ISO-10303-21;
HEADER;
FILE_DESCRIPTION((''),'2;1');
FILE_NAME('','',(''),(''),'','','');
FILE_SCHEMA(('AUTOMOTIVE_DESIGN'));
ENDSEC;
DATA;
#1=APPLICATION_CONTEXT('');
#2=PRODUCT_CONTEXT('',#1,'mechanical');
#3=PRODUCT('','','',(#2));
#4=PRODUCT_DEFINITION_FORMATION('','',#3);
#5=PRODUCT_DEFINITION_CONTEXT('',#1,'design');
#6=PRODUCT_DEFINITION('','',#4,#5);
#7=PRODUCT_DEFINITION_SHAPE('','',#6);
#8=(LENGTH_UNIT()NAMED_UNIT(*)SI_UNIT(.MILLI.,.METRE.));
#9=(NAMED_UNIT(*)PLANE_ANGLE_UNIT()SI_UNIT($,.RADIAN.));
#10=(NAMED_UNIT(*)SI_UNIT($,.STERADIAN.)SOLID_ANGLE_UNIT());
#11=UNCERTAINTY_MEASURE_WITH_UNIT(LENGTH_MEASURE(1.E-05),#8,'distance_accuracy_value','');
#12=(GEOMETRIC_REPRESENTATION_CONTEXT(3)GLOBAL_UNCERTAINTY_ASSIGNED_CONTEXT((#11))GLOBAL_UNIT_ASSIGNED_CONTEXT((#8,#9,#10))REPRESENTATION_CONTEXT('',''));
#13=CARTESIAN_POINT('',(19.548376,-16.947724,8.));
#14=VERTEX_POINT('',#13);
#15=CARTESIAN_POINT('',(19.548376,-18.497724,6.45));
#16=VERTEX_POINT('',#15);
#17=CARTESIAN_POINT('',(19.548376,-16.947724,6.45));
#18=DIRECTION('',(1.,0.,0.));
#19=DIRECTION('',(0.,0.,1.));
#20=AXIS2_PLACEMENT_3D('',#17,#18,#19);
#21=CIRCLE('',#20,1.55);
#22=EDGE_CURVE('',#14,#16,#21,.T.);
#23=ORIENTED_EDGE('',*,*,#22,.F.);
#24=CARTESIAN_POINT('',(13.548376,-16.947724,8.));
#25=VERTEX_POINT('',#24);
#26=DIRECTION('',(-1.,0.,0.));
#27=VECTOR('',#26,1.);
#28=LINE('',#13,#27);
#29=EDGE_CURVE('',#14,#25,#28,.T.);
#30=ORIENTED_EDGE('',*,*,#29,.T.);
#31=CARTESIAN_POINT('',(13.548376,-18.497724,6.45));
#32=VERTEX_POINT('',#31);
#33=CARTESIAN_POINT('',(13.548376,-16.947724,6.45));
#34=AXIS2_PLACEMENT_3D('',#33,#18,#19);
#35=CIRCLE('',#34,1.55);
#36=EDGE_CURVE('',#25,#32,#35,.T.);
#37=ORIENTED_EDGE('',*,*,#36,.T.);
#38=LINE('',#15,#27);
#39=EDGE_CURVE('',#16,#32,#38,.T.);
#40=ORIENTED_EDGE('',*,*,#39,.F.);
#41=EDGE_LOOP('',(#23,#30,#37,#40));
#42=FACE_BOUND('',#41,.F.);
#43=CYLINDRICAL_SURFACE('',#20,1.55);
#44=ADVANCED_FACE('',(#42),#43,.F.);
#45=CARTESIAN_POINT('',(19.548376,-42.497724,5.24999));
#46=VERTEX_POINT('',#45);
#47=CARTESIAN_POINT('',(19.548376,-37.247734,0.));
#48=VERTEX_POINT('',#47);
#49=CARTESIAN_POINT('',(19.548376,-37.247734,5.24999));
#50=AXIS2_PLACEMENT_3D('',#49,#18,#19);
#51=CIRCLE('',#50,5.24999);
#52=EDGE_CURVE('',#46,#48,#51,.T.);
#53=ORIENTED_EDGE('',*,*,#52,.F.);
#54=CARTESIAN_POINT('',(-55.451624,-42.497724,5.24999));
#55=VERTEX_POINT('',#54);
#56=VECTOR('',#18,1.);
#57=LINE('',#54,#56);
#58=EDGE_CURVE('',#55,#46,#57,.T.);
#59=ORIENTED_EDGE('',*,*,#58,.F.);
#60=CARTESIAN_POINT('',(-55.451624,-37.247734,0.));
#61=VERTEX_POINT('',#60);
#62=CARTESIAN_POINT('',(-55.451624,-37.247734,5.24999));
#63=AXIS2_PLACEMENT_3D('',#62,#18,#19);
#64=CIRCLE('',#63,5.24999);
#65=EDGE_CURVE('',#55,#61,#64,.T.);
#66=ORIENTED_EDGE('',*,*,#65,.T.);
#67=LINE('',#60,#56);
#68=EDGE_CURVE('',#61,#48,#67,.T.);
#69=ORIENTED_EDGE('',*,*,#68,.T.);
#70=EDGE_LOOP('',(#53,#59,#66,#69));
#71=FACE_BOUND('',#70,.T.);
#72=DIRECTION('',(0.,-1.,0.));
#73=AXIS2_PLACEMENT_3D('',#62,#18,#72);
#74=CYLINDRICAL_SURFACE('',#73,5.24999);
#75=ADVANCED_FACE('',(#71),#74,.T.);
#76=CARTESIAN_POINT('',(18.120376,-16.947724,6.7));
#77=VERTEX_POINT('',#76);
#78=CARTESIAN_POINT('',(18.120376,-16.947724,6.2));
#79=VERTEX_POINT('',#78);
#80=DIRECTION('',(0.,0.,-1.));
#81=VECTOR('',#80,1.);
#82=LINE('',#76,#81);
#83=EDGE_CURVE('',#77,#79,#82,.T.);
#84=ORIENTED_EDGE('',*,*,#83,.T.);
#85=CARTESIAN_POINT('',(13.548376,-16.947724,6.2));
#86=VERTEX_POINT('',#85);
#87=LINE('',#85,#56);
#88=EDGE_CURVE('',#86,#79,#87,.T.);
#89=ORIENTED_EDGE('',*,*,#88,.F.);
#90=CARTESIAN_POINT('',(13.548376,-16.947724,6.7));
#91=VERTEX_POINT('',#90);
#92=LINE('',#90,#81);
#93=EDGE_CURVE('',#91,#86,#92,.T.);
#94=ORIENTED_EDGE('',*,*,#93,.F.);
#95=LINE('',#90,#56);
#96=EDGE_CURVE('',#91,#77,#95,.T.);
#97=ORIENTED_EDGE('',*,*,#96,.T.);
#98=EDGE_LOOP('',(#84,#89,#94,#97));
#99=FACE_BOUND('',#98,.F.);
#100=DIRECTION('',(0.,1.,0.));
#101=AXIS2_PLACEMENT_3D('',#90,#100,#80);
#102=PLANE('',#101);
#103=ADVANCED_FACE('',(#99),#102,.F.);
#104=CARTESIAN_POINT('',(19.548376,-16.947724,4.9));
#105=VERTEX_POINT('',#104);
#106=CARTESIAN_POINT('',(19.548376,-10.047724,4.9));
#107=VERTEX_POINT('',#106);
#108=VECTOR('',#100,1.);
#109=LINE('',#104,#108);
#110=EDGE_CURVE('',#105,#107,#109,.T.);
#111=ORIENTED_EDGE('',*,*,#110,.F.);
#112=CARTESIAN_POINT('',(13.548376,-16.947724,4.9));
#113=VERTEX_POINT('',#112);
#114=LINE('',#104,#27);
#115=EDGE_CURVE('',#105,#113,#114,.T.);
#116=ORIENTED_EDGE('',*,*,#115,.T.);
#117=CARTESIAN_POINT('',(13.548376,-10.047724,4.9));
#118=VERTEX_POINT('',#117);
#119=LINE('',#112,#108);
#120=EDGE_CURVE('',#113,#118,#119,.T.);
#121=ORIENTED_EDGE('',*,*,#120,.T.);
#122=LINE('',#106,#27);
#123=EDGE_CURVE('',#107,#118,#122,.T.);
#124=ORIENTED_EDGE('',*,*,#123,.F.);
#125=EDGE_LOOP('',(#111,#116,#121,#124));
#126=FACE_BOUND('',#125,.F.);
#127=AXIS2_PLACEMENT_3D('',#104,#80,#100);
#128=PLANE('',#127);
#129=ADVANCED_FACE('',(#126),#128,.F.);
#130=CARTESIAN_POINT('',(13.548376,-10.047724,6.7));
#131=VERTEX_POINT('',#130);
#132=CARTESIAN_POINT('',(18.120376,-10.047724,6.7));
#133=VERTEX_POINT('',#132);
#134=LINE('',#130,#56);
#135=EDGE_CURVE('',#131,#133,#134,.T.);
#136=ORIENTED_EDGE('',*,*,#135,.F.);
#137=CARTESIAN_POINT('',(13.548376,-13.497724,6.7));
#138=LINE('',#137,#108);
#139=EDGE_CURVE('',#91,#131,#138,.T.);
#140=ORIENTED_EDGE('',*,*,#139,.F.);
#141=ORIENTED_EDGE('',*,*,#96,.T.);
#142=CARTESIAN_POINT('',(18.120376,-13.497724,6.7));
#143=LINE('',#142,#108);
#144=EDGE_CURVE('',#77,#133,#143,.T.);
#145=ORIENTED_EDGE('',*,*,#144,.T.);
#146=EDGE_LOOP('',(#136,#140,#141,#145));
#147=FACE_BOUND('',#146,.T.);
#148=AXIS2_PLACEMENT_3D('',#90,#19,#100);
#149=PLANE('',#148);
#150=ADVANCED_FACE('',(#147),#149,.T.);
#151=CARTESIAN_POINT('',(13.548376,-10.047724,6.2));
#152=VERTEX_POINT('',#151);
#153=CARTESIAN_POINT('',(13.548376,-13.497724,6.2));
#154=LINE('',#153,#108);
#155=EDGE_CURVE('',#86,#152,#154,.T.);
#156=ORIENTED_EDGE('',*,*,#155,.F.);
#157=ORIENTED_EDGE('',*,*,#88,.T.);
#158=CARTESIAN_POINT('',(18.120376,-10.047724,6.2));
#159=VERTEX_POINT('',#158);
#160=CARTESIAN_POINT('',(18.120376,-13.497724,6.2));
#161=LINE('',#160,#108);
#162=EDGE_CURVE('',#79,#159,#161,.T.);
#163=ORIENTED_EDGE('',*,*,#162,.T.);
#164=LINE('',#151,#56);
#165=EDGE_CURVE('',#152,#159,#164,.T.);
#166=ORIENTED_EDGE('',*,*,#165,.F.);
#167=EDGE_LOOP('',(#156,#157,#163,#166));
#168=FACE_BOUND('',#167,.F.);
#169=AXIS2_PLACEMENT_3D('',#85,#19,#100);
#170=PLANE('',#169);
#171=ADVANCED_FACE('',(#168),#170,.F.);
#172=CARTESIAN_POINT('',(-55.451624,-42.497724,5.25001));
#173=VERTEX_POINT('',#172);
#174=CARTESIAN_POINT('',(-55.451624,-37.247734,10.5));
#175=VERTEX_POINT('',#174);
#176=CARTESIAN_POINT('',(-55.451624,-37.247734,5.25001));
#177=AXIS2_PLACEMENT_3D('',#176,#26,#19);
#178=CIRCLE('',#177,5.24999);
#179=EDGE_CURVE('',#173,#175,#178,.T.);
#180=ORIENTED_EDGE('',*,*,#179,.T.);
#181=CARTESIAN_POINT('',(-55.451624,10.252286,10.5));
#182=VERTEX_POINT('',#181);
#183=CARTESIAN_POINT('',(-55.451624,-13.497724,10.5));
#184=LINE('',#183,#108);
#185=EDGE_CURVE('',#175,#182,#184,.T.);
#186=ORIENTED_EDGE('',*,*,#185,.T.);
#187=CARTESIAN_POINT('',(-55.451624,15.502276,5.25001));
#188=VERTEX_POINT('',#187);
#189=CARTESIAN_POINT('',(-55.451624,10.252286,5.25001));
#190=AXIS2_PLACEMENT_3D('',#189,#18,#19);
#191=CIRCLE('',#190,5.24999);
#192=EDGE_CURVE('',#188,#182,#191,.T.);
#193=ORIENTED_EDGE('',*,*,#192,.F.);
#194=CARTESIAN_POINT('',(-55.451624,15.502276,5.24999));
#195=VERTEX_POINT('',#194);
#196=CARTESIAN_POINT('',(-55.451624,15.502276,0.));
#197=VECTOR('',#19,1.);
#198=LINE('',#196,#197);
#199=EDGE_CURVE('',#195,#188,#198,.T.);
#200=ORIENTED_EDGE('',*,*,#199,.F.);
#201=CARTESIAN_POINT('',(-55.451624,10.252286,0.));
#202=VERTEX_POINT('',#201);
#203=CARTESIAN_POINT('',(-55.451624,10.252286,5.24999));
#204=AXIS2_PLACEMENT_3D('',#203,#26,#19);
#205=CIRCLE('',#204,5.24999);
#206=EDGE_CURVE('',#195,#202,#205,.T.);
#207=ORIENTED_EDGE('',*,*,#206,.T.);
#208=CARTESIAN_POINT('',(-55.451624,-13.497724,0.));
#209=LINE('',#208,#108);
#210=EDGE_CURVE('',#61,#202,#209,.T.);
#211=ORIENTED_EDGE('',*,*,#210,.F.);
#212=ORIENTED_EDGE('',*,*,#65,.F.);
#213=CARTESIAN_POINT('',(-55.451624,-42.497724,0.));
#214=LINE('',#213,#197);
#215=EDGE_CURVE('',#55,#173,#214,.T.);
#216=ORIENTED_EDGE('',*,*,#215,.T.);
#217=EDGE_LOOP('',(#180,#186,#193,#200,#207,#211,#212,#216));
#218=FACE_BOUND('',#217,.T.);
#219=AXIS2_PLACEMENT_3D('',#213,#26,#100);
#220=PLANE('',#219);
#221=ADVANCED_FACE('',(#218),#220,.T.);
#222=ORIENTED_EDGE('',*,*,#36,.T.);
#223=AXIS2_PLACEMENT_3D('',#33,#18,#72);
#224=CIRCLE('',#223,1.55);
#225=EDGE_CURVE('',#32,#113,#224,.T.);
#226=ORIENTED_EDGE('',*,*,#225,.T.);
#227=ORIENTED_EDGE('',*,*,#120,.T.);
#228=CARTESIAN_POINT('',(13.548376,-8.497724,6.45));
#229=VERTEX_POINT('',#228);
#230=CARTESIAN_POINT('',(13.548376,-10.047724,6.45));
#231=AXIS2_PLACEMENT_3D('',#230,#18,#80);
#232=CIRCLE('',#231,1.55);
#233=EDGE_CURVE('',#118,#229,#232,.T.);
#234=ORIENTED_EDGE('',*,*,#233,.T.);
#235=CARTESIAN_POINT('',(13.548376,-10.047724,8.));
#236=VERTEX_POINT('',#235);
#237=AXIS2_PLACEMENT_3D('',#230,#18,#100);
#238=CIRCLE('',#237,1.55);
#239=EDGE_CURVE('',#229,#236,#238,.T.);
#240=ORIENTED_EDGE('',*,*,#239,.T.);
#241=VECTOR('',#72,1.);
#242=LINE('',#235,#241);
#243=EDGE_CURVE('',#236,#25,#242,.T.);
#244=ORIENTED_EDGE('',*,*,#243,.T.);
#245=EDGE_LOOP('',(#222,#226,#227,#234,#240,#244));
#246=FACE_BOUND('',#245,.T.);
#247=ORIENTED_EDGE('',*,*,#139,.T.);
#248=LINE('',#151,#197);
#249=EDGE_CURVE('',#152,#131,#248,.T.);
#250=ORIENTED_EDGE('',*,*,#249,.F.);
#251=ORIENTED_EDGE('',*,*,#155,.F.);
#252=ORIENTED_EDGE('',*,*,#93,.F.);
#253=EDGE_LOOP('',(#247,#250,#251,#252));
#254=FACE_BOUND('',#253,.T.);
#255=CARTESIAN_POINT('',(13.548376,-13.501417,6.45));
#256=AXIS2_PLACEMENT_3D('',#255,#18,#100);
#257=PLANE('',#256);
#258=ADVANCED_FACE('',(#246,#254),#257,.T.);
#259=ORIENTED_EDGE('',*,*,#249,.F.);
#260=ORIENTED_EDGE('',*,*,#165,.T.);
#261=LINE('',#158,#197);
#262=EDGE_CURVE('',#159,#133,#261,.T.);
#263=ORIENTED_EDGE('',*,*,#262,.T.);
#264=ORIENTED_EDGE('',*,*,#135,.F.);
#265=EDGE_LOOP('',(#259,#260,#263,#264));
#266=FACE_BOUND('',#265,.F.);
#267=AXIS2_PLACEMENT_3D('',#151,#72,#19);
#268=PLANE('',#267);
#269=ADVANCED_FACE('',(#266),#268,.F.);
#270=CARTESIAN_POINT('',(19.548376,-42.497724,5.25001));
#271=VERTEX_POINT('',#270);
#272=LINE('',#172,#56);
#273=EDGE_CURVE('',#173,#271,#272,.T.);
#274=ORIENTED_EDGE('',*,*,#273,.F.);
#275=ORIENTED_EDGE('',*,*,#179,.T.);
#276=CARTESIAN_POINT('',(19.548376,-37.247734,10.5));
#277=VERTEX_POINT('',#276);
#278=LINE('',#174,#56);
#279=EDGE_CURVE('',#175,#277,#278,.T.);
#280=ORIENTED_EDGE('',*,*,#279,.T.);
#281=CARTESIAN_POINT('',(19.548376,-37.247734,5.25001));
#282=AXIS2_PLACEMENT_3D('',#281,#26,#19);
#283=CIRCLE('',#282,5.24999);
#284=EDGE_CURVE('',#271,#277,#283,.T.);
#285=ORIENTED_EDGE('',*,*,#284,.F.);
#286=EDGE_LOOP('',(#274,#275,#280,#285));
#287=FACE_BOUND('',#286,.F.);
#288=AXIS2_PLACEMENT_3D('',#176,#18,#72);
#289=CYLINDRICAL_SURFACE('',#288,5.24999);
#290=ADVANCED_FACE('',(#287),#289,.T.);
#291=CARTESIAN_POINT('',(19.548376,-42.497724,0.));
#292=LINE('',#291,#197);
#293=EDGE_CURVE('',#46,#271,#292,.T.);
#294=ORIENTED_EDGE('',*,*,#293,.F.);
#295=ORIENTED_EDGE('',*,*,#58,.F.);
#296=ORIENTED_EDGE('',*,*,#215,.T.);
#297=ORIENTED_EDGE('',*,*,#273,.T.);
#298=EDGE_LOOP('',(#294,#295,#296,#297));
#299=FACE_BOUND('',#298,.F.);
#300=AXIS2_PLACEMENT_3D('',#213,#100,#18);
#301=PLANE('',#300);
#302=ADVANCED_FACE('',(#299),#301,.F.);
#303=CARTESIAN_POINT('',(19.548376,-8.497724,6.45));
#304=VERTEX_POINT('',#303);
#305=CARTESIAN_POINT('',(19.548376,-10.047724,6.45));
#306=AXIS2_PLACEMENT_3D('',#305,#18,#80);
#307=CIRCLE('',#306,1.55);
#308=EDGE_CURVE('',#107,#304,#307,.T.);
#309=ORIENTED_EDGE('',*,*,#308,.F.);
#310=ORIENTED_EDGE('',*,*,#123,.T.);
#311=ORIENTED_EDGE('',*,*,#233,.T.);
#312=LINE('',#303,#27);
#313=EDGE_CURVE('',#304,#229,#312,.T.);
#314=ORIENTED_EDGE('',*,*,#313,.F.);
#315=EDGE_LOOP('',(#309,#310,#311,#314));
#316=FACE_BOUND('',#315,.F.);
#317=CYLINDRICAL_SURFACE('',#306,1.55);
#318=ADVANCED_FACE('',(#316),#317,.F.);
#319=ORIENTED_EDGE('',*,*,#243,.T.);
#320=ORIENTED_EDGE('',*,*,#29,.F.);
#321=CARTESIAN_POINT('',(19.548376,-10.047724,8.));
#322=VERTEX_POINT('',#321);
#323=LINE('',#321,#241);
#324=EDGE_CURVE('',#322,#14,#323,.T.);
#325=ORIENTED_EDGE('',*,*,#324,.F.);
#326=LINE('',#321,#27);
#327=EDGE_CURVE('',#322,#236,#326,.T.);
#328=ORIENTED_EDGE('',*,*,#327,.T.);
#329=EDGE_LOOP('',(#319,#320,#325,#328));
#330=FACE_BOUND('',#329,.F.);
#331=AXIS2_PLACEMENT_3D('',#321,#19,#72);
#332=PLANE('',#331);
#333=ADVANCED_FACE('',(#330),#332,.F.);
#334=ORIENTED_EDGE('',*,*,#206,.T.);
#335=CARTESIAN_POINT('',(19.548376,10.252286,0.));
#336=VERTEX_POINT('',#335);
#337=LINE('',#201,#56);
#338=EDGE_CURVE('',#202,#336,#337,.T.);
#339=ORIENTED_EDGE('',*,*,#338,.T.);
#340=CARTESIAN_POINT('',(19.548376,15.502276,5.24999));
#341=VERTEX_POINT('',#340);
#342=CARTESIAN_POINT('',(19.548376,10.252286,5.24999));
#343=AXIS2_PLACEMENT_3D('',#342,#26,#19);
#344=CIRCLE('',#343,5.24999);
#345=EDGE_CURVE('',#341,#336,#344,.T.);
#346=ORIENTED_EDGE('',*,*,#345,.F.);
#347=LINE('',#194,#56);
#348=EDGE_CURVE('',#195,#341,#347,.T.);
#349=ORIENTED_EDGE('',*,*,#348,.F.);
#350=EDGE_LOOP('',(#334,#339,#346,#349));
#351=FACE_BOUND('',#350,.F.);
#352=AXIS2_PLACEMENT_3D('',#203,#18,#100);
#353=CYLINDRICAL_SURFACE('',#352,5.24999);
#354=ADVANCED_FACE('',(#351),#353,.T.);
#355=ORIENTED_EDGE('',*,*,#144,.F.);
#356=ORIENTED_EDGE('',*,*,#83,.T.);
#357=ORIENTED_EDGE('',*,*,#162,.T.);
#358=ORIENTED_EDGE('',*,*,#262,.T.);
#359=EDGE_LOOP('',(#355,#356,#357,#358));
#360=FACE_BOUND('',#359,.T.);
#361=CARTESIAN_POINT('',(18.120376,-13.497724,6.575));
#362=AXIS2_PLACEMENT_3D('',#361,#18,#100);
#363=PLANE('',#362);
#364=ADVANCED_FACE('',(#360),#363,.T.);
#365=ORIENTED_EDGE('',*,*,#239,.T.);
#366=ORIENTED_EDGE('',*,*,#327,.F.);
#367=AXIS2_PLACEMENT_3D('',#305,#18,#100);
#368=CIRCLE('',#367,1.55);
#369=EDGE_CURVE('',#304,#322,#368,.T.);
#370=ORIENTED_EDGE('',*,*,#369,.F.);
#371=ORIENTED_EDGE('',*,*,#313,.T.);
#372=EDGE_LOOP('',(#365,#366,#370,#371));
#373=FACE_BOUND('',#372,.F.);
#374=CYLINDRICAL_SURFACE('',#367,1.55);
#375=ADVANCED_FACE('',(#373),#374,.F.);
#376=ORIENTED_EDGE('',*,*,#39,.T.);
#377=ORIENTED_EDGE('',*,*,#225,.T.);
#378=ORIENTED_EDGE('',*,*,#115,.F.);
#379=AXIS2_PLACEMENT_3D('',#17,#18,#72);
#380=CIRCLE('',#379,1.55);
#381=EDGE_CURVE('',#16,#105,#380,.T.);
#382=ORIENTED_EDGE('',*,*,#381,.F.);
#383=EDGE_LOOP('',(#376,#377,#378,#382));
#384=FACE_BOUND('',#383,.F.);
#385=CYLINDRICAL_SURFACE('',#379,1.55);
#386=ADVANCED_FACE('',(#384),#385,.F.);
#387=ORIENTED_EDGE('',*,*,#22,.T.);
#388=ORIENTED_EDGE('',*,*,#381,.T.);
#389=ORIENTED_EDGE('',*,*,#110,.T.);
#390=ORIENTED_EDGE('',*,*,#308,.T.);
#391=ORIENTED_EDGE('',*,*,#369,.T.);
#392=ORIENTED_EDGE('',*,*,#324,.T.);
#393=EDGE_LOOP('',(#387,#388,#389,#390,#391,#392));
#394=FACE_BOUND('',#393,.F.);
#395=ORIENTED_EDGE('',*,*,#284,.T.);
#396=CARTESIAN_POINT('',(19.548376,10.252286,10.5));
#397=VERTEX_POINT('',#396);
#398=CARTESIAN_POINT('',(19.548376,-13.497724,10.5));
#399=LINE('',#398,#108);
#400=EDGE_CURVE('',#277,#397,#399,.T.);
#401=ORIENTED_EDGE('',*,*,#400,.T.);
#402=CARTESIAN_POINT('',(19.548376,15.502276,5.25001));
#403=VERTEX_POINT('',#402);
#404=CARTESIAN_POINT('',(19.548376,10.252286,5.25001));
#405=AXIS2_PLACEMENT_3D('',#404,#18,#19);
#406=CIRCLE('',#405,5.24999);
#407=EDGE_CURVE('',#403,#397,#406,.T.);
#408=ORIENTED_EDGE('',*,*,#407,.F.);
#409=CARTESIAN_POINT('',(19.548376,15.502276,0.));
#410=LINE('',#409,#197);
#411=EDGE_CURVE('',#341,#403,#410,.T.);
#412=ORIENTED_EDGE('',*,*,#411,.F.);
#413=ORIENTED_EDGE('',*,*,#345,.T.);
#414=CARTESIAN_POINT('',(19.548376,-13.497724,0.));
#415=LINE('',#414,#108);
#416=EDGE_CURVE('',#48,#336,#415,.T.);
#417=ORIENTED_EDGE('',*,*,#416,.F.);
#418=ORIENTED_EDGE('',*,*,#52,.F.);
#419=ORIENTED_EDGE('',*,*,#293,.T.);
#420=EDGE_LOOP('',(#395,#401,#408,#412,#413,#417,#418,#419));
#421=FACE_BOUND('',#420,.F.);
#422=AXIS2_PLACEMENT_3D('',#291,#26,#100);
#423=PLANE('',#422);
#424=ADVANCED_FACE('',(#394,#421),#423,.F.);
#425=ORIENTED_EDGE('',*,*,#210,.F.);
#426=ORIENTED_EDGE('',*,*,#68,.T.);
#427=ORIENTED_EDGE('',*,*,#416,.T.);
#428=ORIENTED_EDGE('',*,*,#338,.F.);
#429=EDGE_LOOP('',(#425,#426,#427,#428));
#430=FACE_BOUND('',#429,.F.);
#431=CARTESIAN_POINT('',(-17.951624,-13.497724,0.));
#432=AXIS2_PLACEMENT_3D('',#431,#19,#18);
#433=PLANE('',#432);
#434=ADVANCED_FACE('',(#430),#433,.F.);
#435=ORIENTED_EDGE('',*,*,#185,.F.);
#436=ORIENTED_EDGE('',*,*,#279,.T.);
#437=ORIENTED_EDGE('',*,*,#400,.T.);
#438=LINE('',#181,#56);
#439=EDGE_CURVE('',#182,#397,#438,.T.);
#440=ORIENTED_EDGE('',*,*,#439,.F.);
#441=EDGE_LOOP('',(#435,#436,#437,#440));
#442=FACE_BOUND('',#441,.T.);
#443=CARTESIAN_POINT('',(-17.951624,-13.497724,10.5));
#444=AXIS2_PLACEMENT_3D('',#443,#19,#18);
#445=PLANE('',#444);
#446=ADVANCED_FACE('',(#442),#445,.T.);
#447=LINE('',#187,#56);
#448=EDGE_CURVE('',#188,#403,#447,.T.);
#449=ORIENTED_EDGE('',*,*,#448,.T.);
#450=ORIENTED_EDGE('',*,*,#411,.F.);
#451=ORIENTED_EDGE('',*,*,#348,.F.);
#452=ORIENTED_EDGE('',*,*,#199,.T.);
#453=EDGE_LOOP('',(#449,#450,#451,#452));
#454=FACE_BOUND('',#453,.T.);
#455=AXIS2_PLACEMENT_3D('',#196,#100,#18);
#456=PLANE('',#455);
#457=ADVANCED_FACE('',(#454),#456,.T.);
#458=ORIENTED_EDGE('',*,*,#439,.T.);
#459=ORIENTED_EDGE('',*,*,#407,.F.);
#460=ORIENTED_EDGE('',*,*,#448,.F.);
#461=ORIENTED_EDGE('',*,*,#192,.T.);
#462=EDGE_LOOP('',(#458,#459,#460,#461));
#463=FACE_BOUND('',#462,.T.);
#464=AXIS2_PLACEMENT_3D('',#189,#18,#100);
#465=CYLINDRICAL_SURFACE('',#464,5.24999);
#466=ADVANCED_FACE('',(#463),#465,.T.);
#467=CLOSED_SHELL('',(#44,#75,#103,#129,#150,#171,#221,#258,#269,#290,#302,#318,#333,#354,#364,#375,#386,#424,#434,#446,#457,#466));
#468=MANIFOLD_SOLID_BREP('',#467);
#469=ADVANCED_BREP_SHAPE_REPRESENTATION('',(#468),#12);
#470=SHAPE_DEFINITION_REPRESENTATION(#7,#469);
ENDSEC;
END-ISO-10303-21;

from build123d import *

# Parameters (mm, degrees)
F0_W     = 75
F0_H     = 58
F1_DEPTH = 10.5
F3_R     = 5.24999
F4_DEPTH = 6
F5_W     = 6.9
F5_H     = 0.25
F6_DEPTH = 4.572


# Not quite as in the source:
# - a fillet or chamfer is up to 0.001 mm smaller than in the source, because OpenCascade refuses the exact size


with BuildPart() as f1:
    # F0 (on Top) → F1 (new body)
    with BuildSketch(Plane.XY):
        with Locations((-17.9516240954, -13.4977242947)):
            Rectangle(F0_W, F0_H)
    extrude(amount=F1_DEPTH)

    # F3 (radius 5.25 in the source; OpenCascade refuses exactly that, so slightly less here)
    f3_edges = [f1.edges().sort_by_distance(p)[0] for p in [
        (-17.951624, -42.497724, 10.5),
        (-17.951624, -42.497724, 0),
        (-17.951624, 15.502276, 10.5),
        (-17.951624, 15.502276, 0),
    ]]
    fillet(f3_edges, radius=F3_R)

    # F2 (on face) → F4 (cut)
    with BuildSketch(Plane.YZ.offset(19.5483759046)):
        with BuildLine():
            Line((-10.0477242947, 8), (-13.4977242947, 8))
            Line((-13.4977242947, 8), (-16.9477242947, 8))
            ThreePointArc((-16.9477242947, 8), (-15.8517087838, 7.5460155108), (-15.3977242947, 6.45))
            ThreePointArc((-15.3977242947, 6.45), (-15.8517087838, 5.3539844892), (-16.9477242947, 4.9))
            Line((-16.9477242947, 4.9), (-10.0477242947, 4.9))
            ThreePointArc((-10.0477242947, 4.9), (-11.5977242947, 6.45), (-10.0477242947, 8))
        make_face()
        with BuildLine():
            Line((-10.0477242947, 4.9), (-10.0477242947, 8))
            ThreePointArc((-10.0477242947, 8), (-11.5977242947, 6.45), (-10.0477242947, 4.9))
        make_face()
        with BuildLine():
            ThreePointArc((-8.4977242947, 6.45), (-8.9517087838, 7.5460155108), (-10.0477242947, 8))
            Line((-10.0477242947, 8), (-10.0477242947, 4.9))
            ThreePointArc((-10.0477242947, 4.9), (-8.9517087838, 5.3539844892), (-8.4977242947, 6.45))
        make_face()
        with BuildLine():
            ThreePointArc((-15.3977242947, 6.45), (-15.8517087838, 7.5460155108), (-16.9477242947, 8))
            Line((-16.9477242947, 8), (-16.9477242947, 4.9))
            ThreePointArc((-16.9477242947, 4.9), (-15.8517087838, 5.3539844892), (-15.3977242947, 6.45))
        make_face()
        with BuildLine():
            Line((-16.9477242947, 4.9), (-16.9477242947, 8))
            ThreePointArc((-16.9477242947, 8), (-18.0437398055, 7.5460155108), (-18.4977242947, 6.45))
            ThreePointArc((-18.4977242947, 6.45), (-18.0437398055, 5.3539844892), (-16.9477242947, 4.9))
        make_face()
    extrude(amount=-F4_DEPTH, mode=Mode.SUBTRACT)

    # F5 (on face) → F6 (join)
    with BuildSketch(Plane.YZ.offset(13.5483759046)):
        with Locations((-13.4977242947, 6.575)):
            Rectangle(F5_W, F5_H)
        with Locations((-13.4977242947, 6.325)):
            Rectangle(F5_W, F5_H)
    extrude(amount=F6_DEPTH)


solid = f1.part
